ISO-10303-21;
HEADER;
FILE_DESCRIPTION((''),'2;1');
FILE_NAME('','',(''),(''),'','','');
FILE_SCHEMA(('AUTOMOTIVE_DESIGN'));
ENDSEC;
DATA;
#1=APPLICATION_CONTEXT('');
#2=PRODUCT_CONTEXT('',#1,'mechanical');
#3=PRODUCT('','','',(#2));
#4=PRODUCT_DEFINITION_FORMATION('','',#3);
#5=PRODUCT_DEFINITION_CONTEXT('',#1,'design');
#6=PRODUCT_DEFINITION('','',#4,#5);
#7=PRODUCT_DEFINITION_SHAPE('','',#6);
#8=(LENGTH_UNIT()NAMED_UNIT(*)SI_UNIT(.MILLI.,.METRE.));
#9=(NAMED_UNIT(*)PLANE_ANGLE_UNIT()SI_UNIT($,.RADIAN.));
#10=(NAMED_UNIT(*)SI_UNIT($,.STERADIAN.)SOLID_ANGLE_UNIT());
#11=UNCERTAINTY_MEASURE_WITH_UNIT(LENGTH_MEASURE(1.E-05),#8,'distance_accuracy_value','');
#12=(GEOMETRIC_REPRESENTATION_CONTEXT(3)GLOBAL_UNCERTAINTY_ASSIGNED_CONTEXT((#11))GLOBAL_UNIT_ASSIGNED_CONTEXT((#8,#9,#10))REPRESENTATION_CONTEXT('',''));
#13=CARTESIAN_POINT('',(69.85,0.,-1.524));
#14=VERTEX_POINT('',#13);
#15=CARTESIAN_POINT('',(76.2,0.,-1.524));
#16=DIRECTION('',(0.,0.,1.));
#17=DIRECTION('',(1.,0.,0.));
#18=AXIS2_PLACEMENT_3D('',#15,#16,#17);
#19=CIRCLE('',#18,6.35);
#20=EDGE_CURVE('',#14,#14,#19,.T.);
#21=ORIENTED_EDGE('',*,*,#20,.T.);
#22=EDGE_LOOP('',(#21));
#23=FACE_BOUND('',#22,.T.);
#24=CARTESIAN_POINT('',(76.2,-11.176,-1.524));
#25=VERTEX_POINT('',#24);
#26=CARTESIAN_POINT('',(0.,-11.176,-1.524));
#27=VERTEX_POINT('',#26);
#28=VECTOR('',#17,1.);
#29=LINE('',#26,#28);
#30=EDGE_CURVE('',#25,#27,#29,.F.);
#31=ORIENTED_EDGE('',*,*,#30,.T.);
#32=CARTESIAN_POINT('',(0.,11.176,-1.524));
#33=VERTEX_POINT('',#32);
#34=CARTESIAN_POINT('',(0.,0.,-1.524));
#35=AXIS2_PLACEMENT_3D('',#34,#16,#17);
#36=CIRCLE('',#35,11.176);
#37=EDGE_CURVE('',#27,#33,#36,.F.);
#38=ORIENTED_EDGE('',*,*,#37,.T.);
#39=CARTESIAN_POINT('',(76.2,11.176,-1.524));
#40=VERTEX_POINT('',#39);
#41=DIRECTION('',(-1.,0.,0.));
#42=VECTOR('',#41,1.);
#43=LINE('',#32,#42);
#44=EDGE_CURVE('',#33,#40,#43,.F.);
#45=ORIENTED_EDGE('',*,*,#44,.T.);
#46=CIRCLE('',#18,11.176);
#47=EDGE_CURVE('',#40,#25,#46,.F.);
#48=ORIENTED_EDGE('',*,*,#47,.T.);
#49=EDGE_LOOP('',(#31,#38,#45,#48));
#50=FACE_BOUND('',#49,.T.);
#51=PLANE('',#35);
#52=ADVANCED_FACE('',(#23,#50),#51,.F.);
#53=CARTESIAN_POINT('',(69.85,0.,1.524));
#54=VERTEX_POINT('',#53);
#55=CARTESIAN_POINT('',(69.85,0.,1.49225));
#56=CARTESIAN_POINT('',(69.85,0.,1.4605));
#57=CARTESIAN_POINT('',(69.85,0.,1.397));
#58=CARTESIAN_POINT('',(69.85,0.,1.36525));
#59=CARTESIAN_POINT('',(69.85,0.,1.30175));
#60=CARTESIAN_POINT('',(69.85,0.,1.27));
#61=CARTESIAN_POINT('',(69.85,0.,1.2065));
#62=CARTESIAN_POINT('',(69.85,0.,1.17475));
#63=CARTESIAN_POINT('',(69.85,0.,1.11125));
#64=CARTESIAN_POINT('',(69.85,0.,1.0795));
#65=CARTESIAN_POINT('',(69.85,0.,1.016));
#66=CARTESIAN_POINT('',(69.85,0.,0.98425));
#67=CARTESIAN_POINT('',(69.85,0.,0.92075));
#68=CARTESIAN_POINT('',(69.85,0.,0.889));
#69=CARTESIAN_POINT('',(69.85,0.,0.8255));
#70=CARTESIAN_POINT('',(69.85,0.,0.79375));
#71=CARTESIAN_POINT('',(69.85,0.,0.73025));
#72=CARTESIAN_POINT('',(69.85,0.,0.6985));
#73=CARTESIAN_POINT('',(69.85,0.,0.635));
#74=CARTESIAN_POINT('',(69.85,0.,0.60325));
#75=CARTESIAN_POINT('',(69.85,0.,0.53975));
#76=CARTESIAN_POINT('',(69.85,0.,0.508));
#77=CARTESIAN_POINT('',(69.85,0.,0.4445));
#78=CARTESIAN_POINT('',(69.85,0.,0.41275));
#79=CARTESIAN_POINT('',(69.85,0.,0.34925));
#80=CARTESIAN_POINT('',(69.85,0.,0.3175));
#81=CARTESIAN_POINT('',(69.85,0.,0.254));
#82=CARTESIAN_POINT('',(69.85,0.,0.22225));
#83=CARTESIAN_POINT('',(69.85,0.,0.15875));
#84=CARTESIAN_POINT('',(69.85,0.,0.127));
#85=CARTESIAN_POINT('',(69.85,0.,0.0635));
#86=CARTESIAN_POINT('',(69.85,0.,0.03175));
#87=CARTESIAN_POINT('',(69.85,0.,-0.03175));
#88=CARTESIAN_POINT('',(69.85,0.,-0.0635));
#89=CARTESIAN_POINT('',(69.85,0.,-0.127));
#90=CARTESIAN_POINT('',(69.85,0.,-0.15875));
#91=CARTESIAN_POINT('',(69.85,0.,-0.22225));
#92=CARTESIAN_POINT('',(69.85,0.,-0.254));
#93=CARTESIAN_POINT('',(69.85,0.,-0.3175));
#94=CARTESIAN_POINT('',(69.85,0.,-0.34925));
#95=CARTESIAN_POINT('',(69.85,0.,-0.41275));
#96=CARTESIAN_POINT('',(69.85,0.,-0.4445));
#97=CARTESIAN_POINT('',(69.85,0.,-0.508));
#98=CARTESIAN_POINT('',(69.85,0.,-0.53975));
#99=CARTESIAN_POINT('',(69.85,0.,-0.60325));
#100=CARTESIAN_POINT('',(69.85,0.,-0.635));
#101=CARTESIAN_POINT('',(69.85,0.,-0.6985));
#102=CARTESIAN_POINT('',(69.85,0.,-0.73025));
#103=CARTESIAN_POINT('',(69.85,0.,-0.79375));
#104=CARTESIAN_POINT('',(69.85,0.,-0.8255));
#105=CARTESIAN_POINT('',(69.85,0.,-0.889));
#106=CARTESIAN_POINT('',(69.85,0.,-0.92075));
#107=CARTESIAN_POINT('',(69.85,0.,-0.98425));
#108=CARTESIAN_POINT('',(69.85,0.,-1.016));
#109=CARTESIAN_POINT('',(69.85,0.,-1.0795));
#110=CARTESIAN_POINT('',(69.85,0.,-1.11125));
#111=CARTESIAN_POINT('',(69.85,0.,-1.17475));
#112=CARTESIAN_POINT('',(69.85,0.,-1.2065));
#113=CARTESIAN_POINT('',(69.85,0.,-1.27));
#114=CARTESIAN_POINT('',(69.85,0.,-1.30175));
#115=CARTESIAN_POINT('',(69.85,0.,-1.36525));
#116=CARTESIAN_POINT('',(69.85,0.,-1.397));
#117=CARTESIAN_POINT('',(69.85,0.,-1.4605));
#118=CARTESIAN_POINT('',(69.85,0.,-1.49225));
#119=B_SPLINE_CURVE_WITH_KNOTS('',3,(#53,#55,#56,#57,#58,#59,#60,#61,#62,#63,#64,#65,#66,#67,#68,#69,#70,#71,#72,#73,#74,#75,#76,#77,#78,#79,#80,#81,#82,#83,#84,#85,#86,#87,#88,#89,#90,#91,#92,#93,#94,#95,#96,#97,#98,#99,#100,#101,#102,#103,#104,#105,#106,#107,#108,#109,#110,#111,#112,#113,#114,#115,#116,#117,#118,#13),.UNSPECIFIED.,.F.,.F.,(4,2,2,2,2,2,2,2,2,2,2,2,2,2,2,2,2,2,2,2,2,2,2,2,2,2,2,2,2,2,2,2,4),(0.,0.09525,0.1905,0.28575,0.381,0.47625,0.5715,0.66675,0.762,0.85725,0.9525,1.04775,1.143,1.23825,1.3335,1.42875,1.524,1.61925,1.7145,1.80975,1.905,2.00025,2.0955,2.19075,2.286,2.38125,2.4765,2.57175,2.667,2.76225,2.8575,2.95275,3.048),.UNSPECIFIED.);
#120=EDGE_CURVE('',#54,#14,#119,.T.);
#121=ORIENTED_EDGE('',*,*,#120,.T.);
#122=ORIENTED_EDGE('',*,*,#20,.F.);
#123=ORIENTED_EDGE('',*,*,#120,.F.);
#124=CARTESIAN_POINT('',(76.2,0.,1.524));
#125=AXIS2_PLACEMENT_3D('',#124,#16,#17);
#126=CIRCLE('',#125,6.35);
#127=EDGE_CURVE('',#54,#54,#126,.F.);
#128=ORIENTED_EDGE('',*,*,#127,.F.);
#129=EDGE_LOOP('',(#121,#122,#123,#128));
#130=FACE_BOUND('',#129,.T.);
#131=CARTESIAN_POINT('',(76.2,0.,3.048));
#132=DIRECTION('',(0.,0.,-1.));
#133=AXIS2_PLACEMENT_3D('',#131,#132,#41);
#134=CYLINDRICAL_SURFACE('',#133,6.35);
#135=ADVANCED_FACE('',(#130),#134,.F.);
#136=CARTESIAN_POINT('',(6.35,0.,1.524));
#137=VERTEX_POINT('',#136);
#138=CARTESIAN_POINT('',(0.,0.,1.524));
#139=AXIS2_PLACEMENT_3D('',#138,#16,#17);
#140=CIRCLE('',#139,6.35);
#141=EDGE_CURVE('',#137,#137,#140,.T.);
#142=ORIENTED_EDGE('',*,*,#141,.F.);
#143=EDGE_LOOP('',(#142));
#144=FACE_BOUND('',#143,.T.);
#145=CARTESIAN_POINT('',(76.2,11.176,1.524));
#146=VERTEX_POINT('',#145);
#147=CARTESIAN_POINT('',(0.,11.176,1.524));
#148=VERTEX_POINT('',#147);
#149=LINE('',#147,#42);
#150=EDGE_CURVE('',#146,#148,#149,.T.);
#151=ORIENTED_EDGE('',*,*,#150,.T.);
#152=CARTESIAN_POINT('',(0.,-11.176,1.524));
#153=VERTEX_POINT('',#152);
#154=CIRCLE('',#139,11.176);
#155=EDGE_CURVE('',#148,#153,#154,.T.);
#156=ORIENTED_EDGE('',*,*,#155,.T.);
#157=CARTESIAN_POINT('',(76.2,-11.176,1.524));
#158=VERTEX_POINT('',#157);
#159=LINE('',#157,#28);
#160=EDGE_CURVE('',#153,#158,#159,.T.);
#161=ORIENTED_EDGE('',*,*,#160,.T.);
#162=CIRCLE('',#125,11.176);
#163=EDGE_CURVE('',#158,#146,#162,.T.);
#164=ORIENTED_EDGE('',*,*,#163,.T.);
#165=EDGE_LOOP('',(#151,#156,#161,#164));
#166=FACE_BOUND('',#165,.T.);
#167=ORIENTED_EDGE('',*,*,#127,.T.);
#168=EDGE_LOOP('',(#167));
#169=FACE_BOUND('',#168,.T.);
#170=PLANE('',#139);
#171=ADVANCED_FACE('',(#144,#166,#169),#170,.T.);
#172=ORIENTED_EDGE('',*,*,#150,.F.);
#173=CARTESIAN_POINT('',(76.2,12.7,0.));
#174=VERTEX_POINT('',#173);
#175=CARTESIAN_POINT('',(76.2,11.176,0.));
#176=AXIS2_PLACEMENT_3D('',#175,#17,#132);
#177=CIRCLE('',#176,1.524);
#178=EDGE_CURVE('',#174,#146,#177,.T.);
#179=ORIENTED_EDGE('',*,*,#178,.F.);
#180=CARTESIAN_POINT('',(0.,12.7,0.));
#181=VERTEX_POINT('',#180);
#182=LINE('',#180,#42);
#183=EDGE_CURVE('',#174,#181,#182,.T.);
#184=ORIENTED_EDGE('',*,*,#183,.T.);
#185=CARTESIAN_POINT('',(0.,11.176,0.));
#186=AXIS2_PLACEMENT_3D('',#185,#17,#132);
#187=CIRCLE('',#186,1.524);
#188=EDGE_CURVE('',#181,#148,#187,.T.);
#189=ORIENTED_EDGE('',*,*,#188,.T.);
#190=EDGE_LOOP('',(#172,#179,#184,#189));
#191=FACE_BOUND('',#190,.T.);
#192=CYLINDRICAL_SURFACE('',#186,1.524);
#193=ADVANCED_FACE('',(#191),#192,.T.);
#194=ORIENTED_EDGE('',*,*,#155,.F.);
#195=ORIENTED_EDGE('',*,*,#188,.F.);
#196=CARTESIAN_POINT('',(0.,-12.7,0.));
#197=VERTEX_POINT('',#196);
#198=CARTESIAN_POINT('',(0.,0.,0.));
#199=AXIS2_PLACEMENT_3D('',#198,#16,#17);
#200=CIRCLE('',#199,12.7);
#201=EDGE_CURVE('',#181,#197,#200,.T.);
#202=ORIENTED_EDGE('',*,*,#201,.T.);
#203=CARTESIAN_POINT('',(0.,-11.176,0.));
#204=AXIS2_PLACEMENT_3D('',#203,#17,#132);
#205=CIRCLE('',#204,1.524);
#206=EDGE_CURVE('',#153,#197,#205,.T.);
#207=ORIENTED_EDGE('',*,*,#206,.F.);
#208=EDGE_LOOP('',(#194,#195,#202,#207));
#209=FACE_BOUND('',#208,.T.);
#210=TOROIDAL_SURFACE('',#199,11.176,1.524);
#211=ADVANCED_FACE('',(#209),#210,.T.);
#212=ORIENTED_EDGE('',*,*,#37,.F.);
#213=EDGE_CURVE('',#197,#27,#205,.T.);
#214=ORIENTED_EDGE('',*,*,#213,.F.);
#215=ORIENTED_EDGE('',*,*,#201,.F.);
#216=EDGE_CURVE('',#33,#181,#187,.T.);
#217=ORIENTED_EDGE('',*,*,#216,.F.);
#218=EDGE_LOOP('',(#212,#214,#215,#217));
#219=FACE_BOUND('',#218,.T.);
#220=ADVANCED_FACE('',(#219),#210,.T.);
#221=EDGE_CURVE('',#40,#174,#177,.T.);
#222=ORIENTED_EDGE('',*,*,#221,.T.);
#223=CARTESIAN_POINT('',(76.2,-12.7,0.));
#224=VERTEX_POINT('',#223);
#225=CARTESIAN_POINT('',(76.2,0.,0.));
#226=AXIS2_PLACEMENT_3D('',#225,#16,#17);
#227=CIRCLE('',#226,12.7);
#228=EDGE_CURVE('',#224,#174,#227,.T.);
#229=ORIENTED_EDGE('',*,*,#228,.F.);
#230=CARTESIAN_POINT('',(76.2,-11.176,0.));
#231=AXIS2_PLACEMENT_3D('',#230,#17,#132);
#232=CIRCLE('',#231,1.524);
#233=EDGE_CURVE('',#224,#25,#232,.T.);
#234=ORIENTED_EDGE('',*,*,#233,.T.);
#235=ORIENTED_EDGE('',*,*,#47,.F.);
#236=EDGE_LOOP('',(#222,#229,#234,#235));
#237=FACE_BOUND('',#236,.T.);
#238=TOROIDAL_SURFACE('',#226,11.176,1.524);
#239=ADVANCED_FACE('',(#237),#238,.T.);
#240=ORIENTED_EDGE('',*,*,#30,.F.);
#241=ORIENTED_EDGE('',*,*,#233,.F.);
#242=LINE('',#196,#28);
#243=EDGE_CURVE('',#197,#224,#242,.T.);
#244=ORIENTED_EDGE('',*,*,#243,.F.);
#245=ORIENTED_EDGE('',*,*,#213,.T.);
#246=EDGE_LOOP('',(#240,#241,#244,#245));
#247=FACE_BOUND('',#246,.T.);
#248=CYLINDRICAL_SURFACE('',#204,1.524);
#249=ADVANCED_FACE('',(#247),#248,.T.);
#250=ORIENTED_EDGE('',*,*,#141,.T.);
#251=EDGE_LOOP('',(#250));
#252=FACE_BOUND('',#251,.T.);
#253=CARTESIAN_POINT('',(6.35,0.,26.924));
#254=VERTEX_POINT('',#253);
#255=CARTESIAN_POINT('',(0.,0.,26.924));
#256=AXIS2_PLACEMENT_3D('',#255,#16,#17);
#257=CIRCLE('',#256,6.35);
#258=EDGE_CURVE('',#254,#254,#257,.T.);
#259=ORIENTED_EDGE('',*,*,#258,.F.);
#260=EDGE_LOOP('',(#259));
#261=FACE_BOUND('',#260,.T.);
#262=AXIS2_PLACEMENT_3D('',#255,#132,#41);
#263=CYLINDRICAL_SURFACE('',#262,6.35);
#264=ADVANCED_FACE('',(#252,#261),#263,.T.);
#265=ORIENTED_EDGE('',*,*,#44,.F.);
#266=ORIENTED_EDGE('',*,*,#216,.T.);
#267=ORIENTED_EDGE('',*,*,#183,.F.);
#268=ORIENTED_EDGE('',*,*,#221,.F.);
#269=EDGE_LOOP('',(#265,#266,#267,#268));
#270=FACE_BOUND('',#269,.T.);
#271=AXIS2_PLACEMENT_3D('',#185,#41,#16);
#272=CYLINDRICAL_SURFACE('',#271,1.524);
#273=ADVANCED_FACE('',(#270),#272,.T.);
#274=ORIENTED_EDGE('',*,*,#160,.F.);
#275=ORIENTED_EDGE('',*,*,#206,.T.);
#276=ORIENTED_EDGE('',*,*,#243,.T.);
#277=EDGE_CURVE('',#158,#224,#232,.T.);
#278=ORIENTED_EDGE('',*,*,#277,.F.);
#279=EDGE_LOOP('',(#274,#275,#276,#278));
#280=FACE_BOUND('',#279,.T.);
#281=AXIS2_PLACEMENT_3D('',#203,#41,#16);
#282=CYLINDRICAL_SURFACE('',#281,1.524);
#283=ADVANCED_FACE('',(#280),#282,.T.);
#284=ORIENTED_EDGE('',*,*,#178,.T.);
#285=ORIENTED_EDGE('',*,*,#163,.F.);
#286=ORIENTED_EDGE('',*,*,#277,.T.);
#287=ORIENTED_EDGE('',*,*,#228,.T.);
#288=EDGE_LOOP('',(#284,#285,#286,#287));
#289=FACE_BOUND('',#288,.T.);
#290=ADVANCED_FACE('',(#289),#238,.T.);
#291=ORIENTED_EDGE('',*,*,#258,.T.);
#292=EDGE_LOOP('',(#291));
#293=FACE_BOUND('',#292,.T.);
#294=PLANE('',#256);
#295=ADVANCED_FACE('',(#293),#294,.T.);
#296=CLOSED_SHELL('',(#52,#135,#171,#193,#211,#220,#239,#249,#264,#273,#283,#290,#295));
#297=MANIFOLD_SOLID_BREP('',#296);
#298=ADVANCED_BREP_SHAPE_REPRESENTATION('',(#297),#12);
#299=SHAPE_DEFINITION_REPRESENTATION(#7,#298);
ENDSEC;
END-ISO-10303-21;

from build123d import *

# Parameters (mm, degrees)
BOSS_EXTRUDE1_DEPTH     = 1.524
CUT_EXTRUDE1_DEPTH      = 3.048
CUT_EXTRUDE1_DEPTH_BACK = 90.815491849
SKETCH2_R               = 6.35
SKETCH4_R               = 6.35
BOSS_EXTRUDE3_DEPTH     = 25.4
FILLET1_R               = 1.524


with BuildPart() as part:
    # Sketch1 → Boss-Extrude1 (new, symmetric)
    with BuildSketch(Plane.XY):
        with BuildLine():
            Line((0, 12.7), (76.2, 12.7))
            ThreePointArc((76.2, 12.7), (88.9, 0), (76.2, -12.7))
            Line((76.2, -12.7), (0, -12.7))
            ThreePointArc((0, -12.7), (-12.7, 0), (0, 12.7))
        make_face()
    extrude(amount=BOSS_EXTRUDE1_DEPTH, both=True)

    # Sketch2 → Cut-Extrude1 (cut, two sides: drawn at the far end of the back side and taken through both)
    with BuildSketch(Plane.XY.offset(-CUT_EXTRUDE1_DEPTH_BACK)):
        with Locations(Location((76.2, 0, 0), (0, 0, 180))):
            Circle(SKETCH2_R)
    extrude(amount=CUT_EXTRUDE1_DEPTH + CUT_EXTRUDE1_DEPTH_BACK, mode=Mode.SUBTRACT)

    # Sketch4 → Boss-Extrude3 (add)
    with BuildSketch(Plane.XY.offset(1.524)):
        Circle(SKETCH4_R)
    extrude(amount=BOSS_EXTRUDE3_DEPTH)

    # Fillet1
    fillet1_edges = [part.edges().sort_by_distance(p)[0] for p in [
        (88.9, 0, 1.524),
        (38.1, -12.7, 1.524),
        (-12.7, 0, 1.524),
        (88.9, 0, -1.524),
        (38.1, -12.7, -1.524),
        (-12.7, 0, -1.524),
        (38.1, 12.7, 1.524),
        (38.1, 12.7, -1.524),
    ]]
    fillet(fillet1_edges, radius=FILLET1_R - 0.0001)  # a hair under: the kernel refuses the full size


solid = part.part
